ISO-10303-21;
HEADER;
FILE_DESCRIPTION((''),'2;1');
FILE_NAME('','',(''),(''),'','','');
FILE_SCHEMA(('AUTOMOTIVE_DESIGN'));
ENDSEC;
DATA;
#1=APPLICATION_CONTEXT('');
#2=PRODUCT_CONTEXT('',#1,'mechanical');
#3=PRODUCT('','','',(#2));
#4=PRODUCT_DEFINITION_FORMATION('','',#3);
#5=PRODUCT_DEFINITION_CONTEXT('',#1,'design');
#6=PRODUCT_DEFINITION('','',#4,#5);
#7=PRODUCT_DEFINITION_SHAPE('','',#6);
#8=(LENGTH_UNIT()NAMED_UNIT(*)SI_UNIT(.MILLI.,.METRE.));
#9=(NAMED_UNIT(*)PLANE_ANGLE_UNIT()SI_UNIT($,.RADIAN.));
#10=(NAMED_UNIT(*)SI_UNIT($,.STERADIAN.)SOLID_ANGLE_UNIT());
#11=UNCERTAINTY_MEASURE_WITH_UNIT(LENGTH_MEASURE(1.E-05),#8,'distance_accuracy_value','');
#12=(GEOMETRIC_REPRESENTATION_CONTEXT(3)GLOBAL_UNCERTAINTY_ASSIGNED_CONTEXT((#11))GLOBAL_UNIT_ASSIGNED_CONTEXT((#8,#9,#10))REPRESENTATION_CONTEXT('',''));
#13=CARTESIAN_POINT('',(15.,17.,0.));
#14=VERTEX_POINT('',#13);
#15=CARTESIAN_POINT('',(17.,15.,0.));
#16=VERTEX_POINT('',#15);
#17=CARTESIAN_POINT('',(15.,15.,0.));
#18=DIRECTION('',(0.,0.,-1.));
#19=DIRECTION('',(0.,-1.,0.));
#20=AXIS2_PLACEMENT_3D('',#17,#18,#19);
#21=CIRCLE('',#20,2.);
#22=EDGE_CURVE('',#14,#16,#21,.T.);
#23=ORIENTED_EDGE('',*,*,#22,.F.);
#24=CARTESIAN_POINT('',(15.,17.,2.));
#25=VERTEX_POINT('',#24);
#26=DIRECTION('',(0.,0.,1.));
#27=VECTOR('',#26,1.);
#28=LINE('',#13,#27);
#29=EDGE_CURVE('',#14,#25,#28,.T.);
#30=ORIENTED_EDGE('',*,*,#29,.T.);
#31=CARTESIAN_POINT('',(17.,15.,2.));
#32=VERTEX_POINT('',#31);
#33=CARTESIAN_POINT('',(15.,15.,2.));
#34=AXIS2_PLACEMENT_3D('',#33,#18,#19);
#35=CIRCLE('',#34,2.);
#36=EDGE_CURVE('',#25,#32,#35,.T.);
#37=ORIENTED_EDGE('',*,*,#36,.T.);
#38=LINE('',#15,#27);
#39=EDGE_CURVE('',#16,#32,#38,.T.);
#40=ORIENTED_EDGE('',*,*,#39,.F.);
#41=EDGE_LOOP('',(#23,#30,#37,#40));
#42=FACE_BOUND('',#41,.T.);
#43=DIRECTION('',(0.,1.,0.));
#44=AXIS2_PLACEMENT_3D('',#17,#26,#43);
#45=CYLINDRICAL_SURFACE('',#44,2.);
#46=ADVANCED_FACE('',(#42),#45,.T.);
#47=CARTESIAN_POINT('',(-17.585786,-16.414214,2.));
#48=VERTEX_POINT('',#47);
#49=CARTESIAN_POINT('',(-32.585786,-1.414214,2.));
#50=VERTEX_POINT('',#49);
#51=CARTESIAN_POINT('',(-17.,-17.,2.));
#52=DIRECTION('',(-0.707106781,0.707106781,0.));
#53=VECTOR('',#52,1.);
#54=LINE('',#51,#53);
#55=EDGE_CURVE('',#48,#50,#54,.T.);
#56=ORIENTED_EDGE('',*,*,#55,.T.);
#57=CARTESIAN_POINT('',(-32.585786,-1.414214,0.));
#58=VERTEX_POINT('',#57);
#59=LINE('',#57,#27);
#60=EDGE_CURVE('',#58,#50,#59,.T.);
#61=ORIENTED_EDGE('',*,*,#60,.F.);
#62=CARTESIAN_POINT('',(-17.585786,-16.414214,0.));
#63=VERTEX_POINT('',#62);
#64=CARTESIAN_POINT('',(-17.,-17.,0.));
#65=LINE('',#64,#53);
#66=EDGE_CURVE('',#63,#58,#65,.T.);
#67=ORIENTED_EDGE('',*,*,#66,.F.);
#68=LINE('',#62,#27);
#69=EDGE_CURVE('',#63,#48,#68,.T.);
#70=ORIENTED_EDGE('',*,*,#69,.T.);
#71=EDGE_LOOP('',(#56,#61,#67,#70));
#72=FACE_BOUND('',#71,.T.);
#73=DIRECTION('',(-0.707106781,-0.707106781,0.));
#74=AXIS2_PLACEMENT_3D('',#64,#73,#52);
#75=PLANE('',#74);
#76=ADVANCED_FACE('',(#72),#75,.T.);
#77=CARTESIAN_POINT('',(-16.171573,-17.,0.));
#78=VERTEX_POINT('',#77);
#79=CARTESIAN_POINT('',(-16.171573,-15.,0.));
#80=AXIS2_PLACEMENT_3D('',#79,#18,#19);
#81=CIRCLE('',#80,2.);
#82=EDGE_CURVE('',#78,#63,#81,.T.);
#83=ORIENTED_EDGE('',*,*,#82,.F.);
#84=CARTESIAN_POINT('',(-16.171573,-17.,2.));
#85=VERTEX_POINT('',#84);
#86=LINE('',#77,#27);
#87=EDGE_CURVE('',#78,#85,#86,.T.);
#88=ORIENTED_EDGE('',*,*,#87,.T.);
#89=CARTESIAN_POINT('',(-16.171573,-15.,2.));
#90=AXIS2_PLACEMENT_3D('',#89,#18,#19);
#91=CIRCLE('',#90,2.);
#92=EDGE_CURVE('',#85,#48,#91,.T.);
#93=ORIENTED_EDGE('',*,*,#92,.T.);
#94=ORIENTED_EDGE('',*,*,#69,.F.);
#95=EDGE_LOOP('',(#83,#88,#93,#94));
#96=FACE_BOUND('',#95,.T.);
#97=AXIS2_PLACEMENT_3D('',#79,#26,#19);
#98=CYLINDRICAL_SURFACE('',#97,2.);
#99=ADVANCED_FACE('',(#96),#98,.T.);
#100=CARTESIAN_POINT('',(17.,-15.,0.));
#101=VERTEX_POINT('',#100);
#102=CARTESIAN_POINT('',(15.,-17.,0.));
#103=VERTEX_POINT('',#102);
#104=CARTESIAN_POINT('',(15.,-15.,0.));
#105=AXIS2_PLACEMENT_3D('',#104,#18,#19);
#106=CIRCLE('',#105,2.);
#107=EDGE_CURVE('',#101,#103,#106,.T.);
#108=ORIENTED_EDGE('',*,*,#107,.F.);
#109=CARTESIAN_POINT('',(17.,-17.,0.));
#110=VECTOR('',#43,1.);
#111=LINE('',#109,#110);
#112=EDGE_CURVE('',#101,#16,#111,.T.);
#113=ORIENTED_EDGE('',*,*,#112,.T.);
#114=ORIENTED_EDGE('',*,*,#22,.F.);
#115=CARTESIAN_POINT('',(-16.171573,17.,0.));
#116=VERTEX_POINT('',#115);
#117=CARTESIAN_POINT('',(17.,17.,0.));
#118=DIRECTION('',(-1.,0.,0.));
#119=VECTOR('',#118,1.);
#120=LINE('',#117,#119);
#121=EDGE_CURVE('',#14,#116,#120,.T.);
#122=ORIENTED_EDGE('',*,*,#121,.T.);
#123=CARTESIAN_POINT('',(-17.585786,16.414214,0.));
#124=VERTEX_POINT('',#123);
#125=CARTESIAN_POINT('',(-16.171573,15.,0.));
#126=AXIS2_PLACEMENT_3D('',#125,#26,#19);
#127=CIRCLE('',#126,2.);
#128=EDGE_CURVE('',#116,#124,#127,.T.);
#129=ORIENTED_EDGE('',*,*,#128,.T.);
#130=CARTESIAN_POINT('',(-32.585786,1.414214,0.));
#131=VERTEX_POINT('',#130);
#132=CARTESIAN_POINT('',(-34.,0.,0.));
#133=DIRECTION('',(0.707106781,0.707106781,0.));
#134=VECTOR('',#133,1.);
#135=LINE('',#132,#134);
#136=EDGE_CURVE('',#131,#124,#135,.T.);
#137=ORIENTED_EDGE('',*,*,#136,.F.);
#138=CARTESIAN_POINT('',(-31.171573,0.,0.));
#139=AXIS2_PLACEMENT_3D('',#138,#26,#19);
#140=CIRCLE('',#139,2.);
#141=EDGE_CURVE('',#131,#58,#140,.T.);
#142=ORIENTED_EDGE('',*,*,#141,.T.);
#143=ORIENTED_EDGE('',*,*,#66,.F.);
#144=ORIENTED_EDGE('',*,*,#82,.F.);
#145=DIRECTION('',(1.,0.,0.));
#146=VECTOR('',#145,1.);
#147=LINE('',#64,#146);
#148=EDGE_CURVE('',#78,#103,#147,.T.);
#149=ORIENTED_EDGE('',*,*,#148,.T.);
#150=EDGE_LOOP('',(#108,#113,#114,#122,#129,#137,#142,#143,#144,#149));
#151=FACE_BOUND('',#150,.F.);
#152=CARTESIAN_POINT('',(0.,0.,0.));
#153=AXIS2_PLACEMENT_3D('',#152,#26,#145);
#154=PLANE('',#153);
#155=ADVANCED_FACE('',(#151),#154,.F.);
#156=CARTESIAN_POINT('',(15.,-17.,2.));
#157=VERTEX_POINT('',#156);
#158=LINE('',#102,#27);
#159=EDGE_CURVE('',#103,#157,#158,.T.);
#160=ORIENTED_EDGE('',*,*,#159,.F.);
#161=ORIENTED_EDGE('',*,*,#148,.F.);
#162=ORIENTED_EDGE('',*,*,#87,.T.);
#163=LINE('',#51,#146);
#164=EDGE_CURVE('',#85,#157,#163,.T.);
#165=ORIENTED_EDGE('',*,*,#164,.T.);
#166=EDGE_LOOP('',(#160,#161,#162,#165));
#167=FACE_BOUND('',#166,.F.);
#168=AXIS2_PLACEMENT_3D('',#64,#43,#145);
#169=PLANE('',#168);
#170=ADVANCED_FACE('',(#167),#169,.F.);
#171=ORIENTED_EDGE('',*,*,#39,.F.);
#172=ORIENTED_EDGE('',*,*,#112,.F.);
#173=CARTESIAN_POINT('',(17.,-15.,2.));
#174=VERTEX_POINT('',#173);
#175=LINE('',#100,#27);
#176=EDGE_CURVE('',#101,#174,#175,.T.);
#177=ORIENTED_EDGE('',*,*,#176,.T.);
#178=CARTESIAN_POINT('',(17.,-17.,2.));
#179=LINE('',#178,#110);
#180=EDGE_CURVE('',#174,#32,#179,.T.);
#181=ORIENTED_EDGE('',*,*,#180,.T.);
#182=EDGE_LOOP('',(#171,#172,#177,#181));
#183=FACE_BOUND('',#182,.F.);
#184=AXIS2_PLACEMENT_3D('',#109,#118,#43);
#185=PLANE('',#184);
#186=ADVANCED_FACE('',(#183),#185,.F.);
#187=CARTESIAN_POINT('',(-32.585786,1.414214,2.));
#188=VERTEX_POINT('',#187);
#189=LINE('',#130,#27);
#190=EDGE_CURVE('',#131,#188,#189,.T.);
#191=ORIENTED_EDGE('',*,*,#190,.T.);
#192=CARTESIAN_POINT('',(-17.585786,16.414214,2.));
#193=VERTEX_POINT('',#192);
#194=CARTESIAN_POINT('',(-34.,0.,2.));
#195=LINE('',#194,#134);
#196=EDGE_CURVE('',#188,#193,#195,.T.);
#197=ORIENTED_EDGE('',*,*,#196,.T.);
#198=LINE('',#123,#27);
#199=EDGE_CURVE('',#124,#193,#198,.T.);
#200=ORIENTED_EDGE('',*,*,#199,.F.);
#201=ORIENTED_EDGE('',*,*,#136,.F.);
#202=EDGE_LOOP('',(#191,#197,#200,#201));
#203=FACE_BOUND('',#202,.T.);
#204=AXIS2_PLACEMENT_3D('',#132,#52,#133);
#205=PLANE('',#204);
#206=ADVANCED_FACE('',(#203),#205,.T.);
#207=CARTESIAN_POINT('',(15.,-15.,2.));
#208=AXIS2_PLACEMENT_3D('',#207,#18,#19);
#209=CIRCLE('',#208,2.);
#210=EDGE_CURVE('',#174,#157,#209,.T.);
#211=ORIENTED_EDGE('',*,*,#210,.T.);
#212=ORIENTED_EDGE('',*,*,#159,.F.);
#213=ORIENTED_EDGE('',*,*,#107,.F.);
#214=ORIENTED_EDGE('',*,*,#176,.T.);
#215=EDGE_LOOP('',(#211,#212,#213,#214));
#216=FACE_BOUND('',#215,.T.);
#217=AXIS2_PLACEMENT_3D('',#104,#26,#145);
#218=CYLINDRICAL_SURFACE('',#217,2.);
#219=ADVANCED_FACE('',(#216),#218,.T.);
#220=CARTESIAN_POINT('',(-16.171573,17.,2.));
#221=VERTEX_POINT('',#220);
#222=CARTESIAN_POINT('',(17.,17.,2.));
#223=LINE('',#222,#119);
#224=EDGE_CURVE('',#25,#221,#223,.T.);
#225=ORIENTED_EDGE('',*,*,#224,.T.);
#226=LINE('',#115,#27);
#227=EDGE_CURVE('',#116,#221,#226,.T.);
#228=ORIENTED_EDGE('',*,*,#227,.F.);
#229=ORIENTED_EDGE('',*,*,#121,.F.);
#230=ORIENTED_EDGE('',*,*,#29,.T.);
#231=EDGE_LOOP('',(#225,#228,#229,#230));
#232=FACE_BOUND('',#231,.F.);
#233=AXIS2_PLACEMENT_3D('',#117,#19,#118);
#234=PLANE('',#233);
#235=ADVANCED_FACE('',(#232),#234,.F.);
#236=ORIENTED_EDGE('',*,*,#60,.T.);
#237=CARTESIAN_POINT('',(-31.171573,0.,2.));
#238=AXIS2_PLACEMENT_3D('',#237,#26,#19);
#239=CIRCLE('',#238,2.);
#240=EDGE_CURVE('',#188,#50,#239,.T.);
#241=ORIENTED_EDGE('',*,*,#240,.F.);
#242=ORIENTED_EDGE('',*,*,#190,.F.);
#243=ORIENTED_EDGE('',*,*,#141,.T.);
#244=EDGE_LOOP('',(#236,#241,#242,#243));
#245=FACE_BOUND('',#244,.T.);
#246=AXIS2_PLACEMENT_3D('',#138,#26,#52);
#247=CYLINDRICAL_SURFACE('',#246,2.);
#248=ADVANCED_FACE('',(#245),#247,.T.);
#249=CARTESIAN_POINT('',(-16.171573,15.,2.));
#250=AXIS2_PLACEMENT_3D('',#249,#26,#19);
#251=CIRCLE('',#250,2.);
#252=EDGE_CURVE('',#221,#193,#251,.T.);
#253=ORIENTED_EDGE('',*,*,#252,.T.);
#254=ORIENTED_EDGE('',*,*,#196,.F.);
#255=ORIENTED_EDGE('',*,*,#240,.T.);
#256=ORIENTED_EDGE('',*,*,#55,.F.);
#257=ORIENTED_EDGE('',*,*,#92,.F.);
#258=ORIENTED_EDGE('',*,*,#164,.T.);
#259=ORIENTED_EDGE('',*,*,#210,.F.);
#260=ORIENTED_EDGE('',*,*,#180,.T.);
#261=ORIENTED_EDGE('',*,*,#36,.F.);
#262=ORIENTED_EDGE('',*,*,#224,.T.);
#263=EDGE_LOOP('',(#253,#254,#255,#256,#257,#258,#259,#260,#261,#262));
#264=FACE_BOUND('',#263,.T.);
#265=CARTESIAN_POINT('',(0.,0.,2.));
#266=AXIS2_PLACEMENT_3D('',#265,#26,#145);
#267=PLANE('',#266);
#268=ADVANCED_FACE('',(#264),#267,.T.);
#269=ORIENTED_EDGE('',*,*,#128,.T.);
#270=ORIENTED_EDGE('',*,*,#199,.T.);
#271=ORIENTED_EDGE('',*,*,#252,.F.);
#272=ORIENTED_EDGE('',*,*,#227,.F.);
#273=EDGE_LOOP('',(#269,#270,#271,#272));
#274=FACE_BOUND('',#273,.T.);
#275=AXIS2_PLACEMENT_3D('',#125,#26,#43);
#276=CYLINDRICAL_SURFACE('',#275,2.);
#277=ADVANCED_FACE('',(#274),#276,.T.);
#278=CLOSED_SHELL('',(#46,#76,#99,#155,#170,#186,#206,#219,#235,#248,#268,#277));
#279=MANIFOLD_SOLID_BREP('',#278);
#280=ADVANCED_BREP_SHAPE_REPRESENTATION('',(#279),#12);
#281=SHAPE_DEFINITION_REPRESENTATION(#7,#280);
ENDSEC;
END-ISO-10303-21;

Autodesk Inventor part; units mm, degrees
ref_plane "YZ Plane" through (0, 0, 0) normal (1, 0, 0) x (0, 1, 0)
ref_plane "XZ Plane" through (0, 0, 0) normal (0, 1, 0) x (-1, 0, 0)
ref_plane "XY Plane" through (0, 0, 0) normal (0, 0, 1) x (1, 0, 0)
sketch "Sketch1" plane through (0, 0, 0) normal (0, 0, 1) x (1, 0, 0)
  line L0 (-17, -17) -> (17, -17)
  line L1 (17, -17) -> (17, 17)
  line L2 (17, 17) -> (-17, 17)
  line L3 (-17, 17) -> (-17, -17)
  line L4 (-17, -17) -> (17, 17) construction
  line L5 (17, -17) -> (-17, 17) construction
  line L6 (-17, -17) -> (-34, 0)
  line L7 (-34, 0) -> (-17, 17)
  point P0 (0, 0)
  point P1 (-17, 0)
  dimension "d154" = 34
  dimension "d155" = 34
  dimension "d180" = 17
extrude "Plate5" add sketch "Sketch1" along normal blind 2
fillet "Corner Round1" radius 2 5 edges at (17, 17, 1) (-17, 17, 1) (-17, -17, 1) (17, -17, 1) (-34, 0, 1)
properties part number "PRS 940-52-03 FDS 1000 CUP 1" material "Stainless Steel"
